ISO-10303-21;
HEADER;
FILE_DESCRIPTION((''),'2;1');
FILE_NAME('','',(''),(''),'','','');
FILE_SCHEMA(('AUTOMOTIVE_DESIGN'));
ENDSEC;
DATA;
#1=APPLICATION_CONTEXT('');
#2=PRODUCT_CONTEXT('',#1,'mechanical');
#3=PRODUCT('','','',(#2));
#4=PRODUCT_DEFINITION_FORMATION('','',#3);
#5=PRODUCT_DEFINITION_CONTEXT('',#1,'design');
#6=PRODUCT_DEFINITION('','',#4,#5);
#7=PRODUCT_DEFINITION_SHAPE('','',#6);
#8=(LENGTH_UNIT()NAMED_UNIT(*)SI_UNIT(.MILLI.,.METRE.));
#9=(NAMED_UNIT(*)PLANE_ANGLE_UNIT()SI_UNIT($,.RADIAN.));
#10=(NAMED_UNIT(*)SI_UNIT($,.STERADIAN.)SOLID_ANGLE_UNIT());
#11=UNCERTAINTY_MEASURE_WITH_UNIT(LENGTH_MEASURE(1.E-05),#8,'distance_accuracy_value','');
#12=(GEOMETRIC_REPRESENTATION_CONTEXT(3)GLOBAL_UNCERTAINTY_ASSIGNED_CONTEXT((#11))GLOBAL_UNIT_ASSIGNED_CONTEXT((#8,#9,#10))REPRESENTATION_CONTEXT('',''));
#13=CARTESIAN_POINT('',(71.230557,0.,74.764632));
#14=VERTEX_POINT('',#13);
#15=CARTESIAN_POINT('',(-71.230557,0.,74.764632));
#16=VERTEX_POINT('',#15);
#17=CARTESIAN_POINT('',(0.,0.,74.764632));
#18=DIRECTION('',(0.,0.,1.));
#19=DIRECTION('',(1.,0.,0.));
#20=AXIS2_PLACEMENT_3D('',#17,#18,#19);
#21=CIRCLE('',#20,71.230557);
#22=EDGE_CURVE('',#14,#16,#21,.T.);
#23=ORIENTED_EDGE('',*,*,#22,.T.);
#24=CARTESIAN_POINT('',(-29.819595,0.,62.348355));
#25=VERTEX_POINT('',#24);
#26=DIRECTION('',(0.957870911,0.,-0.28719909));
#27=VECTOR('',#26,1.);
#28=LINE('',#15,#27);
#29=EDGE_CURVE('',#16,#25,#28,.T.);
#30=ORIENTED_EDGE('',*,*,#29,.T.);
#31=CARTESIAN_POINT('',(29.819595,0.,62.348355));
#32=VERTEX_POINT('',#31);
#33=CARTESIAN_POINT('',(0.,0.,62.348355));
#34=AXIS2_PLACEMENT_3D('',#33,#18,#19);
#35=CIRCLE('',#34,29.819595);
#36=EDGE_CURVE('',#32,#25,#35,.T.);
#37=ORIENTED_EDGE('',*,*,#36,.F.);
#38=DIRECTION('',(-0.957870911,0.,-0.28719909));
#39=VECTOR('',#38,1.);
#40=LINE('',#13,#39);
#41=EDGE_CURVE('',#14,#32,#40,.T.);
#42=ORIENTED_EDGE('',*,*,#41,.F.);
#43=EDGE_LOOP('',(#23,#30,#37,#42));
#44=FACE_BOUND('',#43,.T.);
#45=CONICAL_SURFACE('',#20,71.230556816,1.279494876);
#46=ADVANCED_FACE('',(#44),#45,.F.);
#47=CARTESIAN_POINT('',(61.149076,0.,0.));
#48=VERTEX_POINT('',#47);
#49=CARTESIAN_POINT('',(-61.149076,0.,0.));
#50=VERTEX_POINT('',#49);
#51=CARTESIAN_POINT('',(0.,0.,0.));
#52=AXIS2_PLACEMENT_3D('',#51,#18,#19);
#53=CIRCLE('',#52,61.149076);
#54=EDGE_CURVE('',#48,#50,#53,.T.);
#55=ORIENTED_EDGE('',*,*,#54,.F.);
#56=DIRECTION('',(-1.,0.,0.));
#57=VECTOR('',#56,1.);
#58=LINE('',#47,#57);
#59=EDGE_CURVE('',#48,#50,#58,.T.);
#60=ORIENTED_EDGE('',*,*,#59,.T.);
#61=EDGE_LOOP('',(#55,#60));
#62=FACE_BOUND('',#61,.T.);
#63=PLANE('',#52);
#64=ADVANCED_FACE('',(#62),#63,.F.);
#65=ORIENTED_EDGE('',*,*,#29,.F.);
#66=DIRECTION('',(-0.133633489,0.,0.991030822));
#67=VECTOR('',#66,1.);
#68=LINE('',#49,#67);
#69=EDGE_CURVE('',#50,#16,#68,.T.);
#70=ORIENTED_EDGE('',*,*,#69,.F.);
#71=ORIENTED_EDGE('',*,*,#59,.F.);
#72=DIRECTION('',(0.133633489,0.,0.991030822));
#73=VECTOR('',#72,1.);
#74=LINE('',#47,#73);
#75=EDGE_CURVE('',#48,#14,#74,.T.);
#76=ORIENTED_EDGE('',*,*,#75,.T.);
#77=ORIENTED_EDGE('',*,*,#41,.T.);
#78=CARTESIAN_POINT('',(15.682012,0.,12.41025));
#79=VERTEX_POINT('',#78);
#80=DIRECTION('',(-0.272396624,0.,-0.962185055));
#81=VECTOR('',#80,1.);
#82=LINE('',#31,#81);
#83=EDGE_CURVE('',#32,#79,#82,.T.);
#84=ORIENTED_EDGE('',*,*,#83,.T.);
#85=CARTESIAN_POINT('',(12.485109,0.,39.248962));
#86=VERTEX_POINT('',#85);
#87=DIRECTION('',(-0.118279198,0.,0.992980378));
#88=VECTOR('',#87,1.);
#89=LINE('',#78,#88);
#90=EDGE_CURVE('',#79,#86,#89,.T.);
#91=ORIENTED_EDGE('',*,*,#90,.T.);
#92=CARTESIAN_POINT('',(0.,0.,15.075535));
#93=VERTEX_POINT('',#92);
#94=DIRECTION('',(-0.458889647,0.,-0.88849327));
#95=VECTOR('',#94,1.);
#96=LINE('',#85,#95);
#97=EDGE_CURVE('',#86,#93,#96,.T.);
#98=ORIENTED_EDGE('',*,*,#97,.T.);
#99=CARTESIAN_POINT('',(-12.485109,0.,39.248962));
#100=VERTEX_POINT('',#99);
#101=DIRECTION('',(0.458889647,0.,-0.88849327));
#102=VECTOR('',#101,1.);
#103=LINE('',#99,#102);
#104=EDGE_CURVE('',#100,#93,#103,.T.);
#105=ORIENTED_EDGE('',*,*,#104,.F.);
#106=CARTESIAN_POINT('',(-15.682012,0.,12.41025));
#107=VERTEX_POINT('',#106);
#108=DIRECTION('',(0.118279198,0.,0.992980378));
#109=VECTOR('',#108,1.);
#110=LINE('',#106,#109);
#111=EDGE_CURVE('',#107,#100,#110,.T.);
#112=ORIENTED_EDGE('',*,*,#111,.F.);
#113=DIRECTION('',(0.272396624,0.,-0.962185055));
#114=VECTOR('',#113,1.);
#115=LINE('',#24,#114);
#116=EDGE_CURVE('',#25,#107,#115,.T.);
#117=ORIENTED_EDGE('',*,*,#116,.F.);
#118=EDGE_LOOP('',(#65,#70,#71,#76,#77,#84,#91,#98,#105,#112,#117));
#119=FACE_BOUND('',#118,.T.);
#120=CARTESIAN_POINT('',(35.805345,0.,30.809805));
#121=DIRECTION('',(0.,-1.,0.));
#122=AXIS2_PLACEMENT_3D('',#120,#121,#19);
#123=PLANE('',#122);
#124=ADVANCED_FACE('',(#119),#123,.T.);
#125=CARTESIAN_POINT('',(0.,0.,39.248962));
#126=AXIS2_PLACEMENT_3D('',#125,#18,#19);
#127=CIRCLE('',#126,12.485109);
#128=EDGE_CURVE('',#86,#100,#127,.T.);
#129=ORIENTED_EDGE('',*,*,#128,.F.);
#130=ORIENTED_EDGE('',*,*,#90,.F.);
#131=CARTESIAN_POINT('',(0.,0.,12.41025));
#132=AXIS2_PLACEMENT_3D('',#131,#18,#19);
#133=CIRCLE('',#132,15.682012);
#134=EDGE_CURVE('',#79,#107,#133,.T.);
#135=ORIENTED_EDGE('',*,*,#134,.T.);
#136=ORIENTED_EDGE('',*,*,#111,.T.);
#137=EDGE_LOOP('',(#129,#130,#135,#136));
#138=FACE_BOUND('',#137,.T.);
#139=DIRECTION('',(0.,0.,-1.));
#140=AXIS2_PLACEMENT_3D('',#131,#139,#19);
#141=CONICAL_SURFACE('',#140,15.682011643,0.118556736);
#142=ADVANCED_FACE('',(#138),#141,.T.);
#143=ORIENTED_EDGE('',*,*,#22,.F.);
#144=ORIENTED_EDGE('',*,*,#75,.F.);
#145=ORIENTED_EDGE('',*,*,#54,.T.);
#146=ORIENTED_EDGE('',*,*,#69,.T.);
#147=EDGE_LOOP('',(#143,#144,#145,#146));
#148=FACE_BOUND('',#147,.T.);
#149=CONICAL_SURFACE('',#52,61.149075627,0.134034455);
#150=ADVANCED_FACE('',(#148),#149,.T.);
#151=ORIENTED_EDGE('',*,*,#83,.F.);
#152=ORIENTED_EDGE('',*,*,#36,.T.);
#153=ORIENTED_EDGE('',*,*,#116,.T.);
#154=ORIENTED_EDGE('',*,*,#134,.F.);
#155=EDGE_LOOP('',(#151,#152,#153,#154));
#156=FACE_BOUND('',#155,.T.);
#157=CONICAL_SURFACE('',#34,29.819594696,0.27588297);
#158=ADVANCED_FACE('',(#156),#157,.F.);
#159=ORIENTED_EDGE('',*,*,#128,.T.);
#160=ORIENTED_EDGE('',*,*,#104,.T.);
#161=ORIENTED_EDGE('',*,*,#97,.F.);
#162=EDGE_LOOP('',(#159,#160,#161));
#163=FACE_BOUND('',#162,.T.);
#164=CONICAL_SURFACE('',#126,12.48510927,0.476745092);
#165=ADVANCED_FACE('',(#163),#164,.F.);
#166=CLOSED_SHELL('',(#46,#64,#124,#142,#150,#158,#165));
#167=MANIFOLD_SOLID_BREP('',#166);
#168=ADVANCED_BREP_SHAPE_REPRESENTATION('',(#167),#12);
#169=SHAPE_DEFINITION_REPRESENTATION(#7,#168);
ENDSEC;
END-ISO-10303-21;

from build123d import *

# Parameters (mm, degrees)
F1_ANGLE = 180


# Not quite as in the source:
# - the program builds the solid bodies; features that only make, move or delete a surface that nothing else refers to are left out


with BuildPart() as f1:
    # F0 (on Front) → F1 (revolve)
    with BuildSketch(Plane.XZ):
        Polygon((12.4851092696, 39.2489619553), (0, 15.0755345821), (0, 0), (61.1490756273, 0), (71.2305568159, 74.7646316886), (29.8195946962, 62.3483546078), (15.6820116428, 12.4102499136), align=None)
    revolve(axis=Axis((0, 0, 7.5377672911), (0, 0, 1)), revolution_arc=F1_ANGLE)


solid = f1.part
